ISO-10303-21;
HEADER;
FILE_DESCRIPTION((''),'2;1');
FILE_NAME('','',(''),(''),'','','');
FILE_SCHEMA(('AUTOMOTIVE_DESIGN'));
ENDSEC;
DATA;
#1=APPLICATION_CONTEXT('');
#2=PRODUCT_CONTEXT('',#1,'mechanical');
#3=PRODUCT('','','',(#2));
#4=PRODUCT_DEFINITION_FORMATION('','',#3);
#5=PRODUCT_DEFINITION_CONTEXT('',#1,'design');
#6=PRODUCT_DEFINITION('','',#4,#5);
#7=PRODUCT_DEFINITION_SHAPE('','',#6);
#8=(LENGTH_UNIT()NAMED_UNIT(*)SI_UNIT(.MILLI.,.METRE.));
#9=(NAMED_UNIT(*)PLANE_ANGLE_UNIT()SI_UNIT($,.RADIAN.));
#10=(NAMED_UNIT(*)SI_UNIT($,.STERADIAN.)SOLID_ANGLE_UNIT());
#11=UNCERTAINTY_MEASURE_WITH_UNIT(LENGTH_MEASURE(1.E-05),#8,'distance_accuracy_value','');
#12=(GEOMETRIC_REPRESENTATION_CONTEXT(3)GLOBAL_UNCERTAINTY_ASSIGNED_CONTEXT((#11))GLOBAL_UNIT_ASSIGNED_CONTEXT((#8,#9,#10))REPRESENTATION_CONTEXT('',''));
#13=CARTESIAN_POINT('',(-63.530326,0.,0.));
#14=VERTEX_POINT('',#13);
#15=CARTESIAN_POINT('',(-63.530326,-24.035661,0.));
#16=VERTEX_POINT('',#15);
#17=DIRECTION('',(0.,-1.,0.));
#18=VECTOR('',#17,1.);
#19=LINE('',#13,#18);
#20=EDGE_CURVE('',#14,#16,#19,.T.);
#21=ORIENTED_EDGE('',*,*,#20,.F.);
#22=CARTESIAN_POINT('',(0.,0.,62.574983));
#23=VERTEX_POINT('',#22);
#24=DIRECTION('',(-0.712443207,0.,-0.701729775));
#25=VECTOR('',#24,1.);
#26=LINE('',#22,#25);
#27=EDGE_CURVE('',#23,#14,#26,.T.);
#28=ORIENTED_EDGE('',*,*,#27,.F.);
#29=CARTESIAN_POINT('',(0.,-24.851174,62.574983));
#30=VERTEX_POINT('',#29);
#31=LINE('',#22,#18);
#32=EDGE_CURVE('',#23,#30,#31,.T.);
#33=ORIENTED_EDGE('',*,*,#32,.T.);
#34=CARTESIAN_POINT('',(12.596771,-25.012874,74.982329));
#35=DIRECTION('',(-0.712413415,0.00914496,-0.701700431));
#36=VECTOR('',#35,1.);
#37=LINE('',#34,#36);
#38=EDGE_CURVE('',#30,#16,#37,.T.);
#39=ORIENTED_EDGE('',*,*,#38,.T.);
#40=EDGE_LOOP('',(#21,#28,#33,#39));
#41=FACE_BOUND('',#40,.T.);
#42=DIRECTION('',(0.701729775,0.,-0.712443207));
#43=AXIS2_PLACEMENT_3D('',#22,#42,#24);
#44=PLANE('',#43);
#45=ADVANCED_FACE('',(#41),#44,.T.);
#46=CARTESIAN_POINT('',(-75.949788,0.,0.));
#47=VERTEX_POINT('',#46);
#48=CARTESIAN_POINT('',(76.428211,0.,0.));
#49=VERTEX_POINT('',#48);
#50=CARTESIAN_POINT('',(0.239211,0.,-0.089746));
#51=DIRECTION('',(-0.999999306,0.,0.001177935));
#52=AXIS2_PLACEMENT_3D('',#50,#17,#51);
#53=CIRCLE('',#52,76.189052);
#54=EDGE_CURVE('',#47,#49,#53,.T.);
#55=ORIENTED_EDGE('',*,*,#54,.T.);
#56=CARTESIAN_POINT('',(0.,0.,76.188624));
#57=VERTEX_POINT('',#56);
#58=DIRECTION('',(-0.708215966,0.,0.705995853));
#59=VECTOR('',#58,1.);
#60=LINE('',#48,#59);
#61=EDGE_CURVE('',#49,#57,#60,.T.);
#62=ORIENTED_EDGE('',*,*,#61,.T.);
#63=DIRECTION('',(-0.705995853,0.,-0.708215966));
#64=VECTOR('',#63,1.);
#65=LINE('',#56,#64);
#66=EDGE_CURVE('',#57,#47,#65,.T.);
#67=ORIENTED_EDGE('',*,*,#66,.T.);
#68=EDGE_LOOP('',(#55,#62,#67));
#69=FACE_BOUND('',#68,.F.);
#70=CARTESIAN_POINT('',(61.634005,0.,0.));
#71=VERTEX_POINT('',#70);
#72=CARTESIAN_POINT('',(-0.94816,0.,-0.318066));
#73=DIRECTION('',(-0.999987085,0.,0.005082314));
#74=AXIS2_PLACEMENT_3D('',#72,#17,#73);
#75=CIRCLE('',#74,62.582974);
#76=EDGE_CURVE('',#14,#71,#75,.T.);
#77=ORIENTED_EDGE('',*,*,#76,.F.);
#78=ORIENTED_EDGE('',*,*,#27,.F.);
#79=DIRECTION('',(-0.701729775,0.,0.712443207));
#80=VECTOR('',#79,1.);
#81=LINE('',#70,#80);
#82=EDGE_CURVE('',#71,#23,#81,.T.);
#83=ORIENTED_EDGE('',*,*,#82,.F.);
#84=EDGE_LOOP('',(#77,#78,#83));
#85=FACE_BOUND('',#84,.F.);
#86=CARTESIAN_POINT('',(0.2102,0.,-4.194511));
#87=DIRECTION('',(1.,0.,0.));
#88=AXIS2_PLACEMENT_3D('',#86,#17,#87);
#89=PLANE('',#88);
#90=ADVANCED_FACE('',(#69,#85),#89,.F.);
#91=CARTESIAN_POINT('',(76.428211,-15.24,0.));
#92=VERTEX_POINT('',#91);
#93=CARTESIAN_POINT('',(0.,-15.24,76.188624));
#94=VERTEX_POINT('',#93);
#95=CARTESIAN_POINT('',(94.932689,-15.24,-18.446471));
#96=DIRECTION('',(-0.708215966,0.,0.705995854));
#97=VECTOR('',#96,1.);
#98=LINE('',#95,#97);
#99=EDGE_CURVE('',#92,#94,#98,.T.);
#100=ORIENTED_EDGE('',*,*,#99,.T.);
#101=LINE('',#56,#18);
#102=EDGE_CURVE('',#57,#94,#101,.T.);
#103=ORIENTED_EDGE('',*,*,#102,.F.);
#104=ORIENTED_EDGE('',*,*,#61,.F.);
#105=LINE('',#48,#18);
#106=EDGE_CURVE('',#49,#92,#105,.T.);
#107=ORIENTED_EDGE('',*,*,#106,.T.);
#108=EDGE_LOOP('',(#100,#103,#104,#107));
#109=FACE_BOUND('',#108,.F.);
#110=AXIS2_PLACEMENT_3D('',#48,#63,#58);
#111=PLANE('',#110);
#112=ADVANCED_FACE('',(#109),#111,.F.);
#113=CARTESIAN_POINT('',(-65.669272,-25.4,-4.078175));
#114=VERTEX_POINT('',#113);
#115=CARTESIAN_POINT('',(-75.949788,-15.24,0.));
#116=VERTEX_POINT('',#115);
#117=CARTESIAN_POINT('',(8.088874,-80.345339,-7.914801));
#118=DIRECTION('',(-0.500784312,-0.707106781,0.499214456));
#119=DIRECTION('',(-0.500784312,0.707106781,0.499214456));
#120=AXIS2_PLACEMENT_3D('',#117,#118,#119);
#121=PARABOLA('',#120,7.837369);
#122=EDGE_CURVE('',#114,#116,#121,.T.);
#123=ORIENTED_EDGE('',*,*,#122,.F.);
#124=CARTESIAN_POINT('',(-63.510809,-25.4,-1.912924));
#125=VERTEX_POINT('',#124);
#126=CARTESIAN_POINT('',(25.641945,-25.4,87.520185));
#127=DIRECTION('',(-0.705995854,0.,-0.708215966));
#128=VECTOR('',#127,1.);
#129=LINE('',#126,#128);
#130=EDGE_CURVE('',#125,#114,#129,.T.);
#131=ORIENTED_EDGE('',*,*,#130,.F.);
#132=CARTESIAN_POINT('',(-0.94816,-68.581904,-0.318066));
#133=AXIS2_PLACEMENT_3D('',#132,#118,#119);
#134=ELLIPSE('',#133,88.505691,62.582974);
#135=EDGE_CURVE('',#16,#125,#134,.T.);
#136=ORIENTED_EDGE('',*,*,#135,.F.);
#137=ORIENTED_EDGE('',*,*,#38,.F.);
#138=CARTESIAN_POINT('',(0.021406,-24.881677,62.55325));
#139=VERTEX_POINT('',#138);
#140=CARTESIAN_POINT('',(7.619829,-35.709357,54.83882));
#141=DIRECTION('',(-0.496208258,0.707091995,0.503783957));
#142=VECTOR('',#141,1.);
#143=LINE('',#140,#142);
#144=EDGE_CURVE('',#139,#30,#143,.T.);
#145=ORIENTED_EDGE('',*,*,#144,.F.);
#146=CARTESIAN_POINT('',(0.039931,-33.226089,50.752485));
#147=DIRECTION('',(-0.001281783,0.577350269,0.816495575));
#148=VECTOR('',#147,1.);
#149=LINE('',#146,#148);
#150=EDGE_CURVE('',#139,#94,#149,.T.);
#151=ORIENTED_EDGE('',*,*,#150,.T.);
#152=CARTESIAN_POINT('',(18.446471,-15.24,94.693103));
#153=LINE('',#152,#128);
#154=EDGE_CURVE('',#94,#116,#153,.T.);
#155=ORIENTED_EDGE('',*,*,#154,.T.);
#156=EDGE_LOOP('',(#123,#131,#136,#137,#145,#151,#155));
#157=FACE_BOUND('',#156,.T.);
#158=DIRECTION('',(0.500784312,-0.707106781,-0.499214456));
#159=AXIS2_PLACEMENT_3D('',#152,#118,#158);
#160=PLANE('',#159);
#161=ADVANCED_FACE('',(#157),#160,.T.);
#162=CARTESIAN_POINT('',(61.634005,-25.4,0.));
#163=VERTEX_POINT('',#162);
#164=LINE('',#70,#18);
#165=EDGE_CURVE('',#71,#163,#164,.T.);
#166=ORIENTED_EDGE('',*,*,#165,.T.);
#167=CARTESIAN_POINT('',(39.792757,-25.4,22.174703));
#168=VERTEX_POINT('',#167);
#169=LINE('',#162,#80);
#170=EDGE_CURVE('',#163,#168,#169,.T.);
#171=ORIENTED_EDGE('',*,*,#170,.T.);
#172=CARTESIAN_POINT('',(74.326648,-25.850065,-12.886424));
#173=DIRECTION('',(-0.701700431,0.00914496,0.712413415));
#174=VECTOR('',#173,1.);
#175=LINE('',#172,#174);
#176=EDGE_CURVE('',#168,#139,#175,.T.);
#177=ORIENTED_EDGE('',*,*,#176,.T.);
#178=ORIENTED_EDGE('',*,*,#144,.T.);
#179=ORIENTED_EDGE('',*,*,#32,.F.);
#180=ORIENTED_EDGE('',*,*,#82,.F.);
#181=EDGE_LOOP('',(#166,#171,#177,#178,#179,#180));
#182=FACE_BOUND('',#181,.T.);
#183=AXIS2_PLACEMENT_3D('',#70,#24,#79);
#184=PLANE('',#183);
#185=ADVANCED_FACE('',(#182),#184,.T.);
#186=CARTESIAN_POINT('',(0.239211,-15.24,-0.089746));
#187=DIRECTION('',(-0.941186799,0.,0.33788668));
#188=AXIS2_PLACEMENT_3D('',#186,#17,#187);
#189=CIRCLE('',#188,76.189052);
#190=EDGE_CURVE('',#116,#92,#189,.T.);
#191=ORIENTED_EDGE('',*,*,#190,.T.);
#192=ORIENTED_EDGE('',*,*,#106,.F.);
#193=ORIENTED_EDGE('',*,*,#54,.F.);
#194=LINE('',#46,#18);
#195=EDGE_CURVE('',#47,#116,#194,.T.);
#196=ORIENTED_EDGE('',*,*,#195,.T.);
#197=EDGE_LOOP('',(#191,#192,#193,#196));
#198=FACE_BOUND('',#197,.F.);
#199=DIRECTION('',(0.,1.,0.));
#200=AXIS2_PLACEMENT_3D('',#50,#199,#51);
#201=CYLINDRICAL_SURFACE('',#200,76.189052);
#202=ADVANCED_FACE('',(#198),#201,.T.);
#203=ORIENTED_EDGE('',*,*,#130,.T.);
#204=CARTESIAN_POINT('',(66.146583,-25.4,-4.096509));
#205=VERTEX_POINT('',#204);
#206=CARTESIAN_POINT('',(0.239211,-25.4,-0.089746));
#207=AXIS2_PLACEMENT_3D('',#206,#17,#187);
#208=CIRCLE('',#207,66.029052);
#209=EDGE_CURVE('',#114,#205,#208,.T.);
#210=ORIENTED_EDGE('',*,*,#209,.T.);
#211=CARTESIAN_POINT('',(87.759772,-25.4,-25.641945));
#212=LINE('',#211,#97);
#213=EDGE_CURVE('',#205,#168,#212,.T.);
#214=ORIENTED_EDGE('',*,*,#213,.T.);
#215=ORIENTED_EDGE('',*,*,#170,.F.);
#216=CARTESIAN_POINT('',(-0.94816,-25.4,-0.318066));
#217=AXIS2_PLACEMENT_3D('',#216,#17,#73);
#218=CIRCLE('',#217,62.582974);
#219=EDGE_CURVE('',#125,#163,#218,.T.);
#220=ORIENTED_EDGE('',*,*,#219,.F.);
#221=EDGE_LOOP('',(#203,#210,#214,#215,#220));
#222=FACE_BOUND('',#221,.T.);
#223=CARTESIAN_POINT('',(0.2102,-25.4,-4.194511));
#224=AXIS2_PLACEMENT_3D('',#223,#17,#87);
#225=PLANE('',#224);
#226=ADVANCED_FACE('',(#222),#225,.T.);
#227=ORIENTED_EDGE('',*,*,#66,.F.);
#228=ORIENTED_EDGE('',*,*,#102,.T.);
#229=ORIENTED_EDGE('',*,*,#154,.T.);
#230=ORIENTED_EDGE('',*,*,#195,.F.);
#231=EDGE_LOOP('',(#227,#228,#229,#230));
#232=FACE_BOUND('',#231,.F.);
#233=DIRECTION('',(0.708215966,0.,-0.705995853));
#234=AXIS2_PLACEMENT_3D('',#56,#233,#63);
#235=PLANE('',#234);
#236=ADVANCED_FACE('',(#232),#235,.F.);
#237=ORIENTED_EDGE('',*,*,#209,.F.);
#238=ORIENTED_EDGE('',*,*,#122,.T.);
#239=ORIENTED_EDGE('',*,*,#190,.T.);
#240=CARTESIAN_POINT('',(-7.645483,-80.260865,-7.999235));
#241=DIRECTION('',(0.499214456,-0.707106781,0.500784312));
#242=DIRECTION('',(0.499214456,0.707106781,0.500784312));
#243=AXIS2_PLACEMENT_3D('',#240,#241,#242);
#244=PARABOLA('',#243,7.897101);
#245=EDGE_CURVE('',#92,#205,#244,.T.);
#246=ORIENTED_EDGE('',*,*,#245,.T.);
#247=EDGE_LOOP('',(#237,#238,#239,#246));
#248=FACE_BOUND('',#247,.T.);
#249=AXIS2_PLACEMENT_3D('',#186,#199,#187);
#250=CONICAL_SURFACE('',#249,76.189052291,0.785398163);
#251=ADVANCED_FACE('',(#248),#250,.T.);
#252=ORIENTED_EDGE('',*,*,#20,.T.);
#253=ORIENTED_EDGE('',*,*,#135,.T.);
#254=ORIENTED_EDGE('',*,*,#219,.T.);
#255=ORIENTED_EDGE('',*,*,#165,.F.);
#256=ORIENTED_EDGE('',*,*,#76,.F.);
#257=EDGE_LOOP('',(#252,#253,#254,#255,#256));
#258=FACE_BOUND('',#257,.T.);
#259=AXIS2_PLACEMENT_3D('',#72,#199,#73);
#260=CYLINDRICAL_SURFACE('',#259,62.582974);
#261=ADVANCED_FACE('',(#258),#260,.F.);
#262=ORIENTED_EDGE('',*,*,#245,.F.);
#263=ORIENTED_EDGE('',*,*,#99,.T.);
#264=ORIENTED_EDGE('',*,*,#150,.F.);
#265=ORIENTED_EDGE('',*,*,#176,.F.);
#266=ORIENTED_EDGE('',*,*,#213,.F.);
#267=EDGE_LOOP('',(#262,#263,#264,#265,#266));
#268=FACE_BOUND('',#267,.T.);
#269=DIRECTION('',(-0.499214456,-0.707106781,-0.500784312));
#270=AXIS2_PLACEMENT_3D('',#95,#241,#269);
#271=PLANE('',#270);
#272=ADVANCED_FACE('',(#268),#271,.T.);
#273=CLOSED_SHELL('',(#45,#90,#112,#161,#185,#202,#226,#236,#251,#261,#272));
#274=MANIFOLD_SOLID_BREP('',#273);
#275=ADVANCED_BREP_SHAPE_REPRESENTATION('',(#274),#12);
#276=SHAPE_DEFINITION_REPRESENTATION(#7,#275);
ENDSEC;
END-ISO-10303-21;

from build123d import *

# Parameters (mm, degrees)
F1_DEPTH    = 25.4
F3_DEPTH    = 25.4
F4_T1_DEPTH = 159.8348336794
F4_T3_DEPTH = 160.173130017
F4_T6_ANGLE = 219.4963428168


# Not quite as in the source:
# - a fillet or chamfer that OpenCascade refuses, or shapes differently, is made with other operations: its cross-section is extruded or revolved along the edge and cut away or added


with BuildPart() as f1:
    # F0 (on Front) → F1 (new body)
    with BuildSketch(Plane.XZ):
        with BuildLine():
            Line((76.4282107728, 0), (0, 76.1886239052))
            Line((0, 76.1886239052), (-75.9497880936, 0))
            ThreePointArc((-75.9497880936, 0), (0.2392113396, -76.2787980571), (76.4282107728, 0))
        make_face()
    extrude(amount=F1_DEPTH)

    # F2 (on Front) → F3 (cut)
    with BuildSketch(Plane.XZ):
        with BuildLine():
            Line((61.6340054605, 0), (0, 62.5749826431))
            Line((0, 62.5749826431), (-63.5303258896, 0))
            ThreePointArc((-63.5303258896, 0), (-0.9481602145, -62.9010402783), (61.6340054605, 0))
        make_face()
    extrude(amount=F3_DEPTH, mode=Mode.SUBTRACT)

    # F4: chamfer of 10.16 on 3 edges, made by hand

    # F4_s2 → F4_t1 (cut)
    with BuildSketch(Plane(origin=(56.5405950538, 0, 56.7183956672), x_dir=(0, 1, 0), z_dir=(-0.7059958535, 0, -0.7082159662))):
        Polygon((-15.24, -53.7888525608), (-25.4, -43.6288525608), (-25.4, -53.7888525608), align=None)
    extrude(amount=F4_T1_DEPTH, mode=Mode.SUBTRACT)

    # F4_s4 → F4_t3 (cut)
    with BuildSketch(Plane(origin=(56.8385652176, 0, -56.6603878972), x_dir=(0, 1, 0), z_dir=(-0.7082159662, 0, 0.7059958535))):
        Polygon((-15.24, -53.9579998959), (-25.4, -43.7979998959), (-25.4, -53.9579998959), align=None)
    extrude(amount=F4_T3_DEPTH, mode=Mode.SUBTRACT)

    # F4_s5 → F4_t6 (revolve, cut)
    with BuildSketch(Plane(origin=(-0.0012303148, 0, -0.0034270544), x_dir=(0, 1, 0), z_dir=(0.3378866803, 0, 0.9411867994))):
        Polygon((-15.24, 75.9335858363), (-25.4, 65.7735858363), (-25.4, 75.9335858363), align=None)
    revolve(axis=Axis((0.2392113396, -25.4, -0.0897457666), (0, -1, 0)), revolution_arc=F4_T6_ANGLE, mode=Mode.SUBTRACT)


solid = f1.part
